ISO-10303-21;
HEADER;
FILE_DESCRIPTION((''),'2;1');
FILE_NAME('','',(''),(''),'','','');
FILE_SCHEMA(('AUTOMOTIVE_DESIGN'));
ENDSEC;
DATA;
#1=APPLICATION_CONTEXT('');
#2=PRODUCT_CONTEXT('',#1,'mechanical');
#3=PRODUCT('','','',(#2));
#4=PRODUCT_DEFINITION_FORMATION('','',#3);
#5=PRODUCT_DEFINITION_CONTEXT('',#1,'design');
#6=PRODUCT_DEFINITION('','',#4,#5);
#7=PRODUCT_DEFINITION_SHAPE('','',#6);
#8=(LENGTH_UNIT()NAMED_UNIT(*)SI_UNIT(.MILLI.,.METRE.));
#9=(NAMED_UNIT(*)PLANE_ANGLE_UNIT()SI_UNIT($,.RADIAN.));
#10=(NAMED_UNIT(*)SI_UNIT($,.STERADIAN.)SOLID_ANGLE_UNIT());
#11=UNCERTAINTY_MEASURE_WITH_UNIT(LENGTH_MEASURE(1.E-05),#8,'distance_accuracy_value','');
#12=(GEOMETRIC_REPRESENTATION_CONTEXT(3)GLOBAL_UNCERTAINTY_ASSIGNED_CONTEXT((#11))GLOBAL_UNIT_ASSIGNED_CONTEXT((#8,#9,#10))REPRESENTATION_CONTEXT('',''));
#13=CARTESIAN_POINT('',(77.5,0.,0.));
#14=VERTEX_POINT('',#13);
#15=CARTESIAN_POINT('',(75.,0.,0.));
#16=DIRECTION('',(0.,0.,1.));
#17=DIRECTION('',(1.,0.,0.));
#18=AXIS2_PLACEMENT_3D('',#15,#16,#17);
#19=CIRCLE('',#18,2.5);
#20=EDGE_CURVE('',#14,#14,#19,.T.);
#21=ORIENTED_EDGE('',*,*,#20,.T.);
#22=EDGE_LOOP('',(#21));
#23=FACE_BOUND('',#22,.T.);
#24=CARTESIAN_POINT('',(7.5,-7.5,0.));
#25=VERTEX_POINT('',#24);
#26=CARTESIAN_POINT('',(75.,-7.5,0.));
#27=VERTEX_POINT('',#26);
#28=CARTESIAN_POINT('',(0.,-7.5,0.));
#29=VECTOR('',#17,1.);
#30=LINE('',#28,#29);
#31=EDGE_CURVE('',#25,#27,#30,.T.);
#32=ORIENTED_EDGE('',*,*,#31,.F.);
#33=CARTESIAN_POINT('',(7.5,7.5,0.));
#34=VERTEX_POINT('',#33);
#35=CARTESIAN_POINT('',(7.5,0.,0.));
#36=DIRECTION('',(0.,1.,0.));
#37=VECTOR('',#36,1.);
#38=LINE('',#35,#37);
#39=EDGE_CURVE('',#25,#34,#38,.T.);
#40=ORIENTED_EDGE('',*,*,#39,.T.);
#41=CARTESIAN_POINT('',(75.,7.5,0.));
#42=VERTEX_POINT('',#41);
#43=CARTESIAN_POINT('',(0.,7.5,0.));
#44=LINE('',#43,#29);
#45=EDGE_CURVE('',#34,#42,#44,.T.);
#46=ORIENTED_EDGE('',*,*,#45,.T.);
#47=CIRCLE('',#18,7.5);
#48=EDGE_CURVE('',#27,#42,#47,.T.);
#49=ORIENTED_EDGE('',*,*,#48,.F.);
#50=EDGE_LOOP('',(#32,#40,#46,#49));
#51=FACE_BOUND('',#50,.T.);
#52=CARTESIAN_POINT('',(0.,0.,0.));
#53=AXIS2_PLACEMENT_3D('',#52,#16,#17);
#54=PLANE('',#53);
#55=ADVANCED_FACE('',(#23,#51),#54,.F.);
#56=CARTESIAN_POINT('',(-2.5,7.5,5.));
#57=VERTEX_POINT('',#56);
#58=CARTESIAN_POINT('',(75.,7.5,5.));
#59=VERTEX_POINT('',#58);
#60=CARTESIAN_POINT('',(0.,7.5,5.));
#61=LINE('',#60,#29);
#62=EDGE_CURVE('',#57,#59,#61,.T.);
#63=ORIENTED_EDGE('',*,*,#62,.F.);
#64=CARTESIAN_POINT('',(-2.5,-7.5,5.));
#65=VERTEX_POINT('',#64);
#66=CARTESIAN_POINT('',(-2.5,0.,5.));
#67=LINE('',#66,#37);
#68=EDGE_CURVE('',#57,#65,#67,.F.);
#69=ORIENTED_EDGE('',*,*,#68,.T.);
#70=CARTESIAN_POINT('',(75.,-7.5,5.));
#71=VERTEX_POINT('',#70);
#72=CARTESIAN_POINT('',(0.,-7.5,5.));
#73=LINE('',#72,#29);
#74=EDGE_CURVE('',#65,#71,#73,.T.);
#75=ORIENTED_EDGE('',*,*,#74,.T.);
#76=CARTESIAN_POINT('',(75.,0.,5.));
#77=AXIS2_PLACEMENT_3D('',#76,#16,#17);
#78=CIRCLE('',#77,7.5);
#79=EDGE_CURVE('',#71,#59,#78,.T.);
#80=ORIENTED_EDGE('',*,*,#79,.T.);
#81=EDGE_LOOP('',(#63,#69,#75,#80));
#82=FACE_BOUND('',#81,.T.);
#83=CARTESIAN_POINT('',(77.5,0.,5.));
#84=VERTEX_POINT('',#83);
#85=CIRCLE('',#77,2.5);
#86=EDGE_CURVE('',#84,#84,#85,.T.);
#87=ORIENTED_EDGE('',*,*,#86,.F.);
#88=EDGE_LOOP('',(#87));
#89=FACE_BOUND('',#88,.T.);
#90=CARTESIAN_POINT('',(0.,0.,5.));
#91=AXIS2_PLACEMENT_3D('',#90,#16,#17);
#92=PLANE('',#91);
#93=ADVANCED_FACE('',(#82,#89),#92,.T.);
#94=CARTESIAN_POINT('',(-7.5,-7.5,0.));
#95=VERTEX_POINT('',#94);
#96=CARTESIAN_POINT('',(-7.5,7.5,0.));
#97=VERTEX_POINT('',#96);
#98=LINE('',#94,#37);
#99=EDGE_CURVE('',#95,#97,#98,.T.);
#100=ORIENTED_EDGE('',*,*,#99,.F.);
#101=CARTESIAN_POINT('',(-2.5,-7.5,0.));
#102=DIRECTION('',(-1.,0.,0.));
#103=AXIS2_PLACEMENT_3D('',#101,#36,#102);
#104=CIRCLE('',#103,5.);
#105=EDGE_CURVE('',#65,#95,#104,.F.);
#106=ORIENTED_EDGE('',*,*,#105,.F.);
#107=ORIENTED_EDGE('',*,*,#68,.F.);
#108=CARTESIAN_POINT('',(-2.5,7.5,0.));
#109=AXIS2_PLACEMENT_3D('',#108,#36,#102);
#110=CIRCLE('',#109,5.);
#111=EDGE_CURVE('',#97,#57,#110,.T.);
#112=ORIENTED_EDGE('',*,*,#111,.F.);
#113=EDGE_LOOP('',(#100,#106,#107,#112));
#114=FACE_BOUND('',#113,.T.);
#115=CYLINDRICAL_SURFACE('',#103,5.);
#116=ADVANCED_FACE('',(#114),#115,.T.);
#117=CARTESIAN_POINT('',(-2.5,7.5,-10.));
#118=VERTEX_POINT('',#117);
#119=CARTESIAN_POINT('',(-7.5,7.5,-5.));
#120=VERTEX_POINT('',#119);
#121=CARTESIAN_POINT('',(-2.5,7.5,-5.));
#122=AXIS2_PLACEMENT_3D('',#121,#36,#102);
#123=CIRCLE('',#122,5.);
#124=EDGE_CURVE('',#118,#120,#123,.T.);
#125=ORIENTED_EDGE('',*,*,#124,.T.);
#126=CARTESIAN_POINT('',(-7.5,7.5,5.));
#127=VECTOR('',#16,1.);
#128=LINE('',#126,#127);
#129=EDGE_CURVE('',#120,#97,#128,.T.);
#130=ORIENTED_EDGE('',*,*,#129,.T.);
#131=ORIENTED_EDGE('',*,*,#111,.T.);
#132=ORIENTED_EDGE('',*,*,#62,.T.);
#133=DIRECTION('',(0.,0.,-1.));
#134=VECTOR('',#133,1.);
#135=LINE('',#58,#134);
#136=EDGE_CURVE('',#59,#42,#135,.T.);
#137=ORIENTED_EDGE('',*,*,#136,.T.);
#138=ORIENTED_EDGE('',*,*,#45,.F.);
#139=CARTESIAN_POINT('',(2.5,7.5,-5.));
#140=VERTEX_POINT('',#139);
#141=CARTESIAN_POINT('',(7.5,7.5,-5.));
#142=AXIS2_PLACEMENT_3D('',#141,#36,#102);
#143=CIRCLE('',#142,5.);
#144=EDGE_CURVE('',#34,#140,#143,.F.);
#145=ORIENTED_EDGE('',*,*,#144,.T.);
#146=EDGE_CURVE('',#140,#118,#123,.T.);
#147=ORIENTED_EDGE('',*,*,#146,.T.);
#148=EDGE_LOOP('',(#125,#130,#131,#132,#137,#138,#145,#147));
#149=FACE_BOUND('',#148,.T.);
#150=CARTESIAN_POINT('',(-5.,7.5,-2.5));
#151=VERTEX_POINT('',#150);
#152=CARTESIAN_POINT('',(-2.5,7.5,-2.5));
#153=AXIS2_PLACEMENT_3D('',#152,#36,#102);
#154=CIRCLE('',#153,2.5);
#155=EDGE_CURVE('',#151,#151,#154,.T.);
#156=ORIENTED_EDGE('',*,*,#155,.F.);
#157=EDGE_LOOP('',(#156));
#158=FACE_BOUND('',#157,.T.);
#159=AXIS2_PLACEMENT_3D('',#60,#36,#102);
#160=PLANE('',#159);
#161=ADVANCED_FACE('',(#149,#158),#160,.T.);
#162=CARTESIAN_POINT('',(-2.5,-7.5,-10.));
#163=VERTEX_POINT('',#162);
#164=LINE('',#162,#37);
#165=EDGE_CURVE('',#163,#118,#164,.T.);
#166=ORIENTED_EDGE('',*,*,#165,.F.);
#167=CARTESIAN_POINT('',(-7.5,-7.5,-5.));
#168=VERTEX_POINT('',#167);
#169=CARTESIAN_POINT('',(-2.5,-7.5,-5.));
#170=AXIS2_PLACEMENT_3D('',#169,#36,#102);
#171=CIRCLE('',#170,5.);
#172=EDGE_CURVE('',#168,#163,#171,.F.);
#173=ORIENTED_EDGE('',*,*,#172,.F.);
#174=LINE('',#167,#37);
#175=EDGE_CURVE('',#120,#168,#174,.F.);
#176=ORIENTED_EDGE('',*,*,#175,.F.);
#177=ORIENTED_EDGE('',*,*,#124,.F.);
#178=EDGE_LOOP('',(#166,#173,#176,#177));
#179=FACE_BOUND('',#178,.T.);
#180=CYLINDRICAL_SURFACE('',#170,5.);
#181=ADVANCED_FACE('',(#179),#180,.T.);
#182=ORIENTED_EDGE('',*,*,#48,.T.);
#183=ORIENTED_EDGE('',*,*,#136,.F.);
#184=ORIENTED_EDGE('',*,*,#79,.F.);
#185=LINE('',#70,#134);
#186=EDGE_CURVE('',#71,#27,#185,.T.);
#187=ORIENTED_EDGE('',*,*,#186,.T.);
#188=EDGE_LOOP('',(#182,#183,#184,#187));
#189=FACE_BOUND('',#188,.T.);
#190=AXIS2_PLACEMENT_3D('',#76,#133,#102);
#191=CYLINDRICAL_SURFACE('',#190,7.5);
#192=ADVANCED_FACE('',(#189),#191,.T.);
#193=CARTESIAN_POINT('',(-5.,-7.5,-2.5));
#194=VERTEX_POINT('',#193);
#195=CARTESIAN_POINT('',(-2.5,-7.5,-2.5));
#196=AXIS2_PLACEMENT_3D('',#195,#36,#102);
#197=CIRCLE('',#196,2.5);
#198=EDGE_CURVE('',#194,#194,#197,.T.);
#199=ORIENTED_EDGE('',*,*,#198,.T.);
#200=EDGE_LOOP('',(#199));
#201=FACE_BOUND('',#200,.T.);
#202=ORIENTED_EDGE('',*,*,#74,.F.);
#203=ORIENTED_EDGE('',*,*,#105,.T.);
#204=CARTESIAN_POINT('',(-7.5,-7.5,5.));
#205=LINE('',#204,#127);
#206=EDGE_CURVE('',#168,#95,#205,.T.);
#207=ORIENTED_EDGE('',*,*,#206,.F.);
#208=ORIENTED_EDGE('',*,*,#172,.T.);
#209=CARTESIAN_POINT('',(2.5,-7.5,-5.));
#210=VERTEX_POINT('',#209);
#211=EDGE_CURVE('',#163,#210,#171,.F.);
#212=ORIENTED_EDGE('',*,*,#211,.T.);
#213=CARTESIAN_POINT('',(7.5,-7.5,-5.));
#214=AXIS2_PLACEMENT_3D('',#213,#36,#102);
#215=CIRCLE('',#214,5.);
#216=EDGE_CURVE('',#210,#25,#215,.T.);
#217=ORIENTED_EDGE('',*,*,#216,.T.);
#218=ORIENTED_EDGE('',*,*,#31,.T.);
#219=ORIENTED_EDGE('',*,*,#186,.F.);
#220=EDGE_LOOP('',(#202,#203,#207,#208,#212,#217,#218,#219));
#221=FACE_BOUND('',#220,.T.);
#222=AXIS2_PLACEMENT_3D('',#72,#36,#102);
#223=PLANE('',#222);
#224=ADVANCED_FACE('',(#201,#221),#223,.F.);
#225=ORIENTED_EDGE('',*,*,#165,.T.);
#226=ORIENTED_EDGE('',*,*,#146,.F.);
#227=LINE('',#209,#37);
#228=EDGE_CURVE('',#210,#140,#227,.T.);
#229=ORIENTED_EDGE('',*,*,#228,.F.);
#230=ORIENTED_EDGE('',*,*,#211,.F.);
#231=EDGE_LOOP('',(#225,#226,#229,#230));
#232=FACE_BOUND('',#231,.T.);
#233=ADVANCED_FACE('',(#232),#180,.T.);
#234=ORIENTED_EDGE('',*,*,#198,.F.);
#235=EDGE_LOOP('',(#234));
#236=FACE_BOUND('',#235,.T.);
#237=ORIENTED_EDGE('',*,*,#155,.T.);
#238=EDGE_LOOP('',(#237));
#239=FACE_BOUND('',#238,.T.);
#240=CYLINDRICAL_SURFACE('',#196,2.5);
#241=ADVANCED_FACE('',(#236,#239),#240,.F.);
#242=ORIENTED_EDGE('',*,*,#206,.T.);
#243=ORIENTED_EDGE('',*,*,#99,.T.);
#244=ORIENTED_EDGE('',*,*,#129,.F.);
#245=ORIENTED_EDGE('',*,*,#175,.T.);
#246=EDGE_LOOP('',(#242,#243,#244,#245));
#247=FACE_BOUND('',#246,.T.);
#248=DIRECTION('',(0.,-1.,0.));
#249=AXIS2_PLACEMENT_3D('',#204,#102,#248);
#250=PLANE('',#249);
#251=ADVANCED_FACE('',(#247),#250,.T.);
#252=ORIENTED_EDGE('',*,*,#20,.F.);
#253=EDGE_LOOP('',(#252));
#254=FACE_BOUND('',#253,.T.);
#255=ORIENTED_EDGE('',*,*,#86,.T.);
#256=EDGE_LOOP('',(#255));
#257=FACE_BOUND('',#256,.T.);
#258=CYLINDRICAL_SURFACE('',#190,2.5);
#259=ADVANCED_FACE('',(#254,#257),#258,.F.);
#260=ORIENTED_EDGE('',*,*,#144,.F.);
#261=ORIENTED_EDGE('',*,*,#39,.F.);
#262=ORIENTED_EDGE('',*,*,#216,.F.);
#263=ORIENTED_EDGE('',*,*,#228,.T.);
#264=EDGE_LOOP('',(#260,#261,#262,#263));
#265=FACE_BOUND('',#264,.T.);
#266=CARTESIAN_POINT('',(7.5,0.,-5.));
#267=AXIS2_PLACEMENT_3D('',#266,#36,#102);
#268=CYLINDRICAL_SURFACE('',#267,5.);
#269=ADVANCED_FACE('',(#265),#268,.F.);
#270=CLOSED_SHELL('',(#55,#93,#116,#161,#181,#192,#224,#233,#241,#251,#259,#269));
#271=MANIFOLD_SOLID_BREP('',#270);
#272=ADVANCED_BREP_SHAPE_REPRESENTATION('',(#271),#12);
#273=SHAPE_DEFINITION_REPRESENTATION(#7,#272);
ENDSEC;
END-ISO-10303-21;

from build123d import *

# Parameters (mm, degrees)
SKETCH1_R           = 7.5
SKETCH1_R_2         = 2.5
BOSS_EXTRUDE1_DEPTH = 5
SKETCH3_W           = 10
SKETCH3_H           = 15
BOSS_EXTRUDE2_DEPTH = 15
SKETCH4_R           = 2.5
CUT_EXTRUDE1_DEPTH  = 15
FILLET1_R           = 5


with BuildPart() as part:
    # Sketch1 → Boss-Extrude1 (new body)
    # profile 1 of 3: a face of its own
    with BuildSketch(Plane.XY):
        Circle(SKETCH1_R)
        Circle(SKETCH1_R_2, mode=Mode.SUBTRACT)
    # profile 2 of 3: a face of its own
    with BuildSketch(Plane.XY):
        with BuildLine():
            Line((75, 7.5), (0, 7.5))
            ThreePointArc((0, 7.5), (5.303300859, 5.303300859), (7.5, 0))
            ThreePointArc((7.5, 0), (5.303300859, -5.303300859), (0, -7.5))
            Line((0, -7.5), (75, -7.5))
            ThreePointArc((75, -7.5), (67.5, 0), (75, 7.5))
        make_face()
    # profile 3 of 3: a face of its own
    with BuildSketch(Plane.XY):
        with Locations((75, 0)):
            Circle(SKETCH1_R)
        with Locations((75, 0)):
            Circle(SKETCH1_R_2, mode=Mode.SUBTRACT)
    extrude(amount=BOSS_EXTRUDE1_DEPTH)

    # Sketch3 → Boss-Extrude2 (add)
    with BuildSketch(Plane(origin=(0, 7.5, 0), x_dir=(1, 0, 0), z_dir=(0, 1, 0))):
        with Locations((-2.5, 2.5)):
            Rectangle(SKETCH3_W, SKETCH3_H)
    extrude(amount=-BOSS_EXTRUDE2_DEPTH)

    # Sketch4 → Cut-Extrude1 (cut)
    with BuildSketch(Plane(origin=(0, 7.5, 0), x_dir=(1, 0, 0), z_dir=(0, 1, 0))):
        with Locations(Location((-2.5, 2.5, 0), (0, 0, 180))):
            Circle(SKETCH4_R)
    extrude(amount=-CUT_EXTRUDE1_DEPTH, mode=Mode.SUBTRACT)

    # Fillet1
    fillet1_edges = [part.edges().sort_by_distance(p)[0] for p in [
        (-7.5, -3.75, 5),
        (2.5, 0, 0),
        (2.5, 0, -10),
        (-7.5, 0, -10),
    ]]
    fillet(fillet1_edges, radius=FILLET1_R - 0.0001)  # a hair under: the kernel refuses the full size


solid = part.part
